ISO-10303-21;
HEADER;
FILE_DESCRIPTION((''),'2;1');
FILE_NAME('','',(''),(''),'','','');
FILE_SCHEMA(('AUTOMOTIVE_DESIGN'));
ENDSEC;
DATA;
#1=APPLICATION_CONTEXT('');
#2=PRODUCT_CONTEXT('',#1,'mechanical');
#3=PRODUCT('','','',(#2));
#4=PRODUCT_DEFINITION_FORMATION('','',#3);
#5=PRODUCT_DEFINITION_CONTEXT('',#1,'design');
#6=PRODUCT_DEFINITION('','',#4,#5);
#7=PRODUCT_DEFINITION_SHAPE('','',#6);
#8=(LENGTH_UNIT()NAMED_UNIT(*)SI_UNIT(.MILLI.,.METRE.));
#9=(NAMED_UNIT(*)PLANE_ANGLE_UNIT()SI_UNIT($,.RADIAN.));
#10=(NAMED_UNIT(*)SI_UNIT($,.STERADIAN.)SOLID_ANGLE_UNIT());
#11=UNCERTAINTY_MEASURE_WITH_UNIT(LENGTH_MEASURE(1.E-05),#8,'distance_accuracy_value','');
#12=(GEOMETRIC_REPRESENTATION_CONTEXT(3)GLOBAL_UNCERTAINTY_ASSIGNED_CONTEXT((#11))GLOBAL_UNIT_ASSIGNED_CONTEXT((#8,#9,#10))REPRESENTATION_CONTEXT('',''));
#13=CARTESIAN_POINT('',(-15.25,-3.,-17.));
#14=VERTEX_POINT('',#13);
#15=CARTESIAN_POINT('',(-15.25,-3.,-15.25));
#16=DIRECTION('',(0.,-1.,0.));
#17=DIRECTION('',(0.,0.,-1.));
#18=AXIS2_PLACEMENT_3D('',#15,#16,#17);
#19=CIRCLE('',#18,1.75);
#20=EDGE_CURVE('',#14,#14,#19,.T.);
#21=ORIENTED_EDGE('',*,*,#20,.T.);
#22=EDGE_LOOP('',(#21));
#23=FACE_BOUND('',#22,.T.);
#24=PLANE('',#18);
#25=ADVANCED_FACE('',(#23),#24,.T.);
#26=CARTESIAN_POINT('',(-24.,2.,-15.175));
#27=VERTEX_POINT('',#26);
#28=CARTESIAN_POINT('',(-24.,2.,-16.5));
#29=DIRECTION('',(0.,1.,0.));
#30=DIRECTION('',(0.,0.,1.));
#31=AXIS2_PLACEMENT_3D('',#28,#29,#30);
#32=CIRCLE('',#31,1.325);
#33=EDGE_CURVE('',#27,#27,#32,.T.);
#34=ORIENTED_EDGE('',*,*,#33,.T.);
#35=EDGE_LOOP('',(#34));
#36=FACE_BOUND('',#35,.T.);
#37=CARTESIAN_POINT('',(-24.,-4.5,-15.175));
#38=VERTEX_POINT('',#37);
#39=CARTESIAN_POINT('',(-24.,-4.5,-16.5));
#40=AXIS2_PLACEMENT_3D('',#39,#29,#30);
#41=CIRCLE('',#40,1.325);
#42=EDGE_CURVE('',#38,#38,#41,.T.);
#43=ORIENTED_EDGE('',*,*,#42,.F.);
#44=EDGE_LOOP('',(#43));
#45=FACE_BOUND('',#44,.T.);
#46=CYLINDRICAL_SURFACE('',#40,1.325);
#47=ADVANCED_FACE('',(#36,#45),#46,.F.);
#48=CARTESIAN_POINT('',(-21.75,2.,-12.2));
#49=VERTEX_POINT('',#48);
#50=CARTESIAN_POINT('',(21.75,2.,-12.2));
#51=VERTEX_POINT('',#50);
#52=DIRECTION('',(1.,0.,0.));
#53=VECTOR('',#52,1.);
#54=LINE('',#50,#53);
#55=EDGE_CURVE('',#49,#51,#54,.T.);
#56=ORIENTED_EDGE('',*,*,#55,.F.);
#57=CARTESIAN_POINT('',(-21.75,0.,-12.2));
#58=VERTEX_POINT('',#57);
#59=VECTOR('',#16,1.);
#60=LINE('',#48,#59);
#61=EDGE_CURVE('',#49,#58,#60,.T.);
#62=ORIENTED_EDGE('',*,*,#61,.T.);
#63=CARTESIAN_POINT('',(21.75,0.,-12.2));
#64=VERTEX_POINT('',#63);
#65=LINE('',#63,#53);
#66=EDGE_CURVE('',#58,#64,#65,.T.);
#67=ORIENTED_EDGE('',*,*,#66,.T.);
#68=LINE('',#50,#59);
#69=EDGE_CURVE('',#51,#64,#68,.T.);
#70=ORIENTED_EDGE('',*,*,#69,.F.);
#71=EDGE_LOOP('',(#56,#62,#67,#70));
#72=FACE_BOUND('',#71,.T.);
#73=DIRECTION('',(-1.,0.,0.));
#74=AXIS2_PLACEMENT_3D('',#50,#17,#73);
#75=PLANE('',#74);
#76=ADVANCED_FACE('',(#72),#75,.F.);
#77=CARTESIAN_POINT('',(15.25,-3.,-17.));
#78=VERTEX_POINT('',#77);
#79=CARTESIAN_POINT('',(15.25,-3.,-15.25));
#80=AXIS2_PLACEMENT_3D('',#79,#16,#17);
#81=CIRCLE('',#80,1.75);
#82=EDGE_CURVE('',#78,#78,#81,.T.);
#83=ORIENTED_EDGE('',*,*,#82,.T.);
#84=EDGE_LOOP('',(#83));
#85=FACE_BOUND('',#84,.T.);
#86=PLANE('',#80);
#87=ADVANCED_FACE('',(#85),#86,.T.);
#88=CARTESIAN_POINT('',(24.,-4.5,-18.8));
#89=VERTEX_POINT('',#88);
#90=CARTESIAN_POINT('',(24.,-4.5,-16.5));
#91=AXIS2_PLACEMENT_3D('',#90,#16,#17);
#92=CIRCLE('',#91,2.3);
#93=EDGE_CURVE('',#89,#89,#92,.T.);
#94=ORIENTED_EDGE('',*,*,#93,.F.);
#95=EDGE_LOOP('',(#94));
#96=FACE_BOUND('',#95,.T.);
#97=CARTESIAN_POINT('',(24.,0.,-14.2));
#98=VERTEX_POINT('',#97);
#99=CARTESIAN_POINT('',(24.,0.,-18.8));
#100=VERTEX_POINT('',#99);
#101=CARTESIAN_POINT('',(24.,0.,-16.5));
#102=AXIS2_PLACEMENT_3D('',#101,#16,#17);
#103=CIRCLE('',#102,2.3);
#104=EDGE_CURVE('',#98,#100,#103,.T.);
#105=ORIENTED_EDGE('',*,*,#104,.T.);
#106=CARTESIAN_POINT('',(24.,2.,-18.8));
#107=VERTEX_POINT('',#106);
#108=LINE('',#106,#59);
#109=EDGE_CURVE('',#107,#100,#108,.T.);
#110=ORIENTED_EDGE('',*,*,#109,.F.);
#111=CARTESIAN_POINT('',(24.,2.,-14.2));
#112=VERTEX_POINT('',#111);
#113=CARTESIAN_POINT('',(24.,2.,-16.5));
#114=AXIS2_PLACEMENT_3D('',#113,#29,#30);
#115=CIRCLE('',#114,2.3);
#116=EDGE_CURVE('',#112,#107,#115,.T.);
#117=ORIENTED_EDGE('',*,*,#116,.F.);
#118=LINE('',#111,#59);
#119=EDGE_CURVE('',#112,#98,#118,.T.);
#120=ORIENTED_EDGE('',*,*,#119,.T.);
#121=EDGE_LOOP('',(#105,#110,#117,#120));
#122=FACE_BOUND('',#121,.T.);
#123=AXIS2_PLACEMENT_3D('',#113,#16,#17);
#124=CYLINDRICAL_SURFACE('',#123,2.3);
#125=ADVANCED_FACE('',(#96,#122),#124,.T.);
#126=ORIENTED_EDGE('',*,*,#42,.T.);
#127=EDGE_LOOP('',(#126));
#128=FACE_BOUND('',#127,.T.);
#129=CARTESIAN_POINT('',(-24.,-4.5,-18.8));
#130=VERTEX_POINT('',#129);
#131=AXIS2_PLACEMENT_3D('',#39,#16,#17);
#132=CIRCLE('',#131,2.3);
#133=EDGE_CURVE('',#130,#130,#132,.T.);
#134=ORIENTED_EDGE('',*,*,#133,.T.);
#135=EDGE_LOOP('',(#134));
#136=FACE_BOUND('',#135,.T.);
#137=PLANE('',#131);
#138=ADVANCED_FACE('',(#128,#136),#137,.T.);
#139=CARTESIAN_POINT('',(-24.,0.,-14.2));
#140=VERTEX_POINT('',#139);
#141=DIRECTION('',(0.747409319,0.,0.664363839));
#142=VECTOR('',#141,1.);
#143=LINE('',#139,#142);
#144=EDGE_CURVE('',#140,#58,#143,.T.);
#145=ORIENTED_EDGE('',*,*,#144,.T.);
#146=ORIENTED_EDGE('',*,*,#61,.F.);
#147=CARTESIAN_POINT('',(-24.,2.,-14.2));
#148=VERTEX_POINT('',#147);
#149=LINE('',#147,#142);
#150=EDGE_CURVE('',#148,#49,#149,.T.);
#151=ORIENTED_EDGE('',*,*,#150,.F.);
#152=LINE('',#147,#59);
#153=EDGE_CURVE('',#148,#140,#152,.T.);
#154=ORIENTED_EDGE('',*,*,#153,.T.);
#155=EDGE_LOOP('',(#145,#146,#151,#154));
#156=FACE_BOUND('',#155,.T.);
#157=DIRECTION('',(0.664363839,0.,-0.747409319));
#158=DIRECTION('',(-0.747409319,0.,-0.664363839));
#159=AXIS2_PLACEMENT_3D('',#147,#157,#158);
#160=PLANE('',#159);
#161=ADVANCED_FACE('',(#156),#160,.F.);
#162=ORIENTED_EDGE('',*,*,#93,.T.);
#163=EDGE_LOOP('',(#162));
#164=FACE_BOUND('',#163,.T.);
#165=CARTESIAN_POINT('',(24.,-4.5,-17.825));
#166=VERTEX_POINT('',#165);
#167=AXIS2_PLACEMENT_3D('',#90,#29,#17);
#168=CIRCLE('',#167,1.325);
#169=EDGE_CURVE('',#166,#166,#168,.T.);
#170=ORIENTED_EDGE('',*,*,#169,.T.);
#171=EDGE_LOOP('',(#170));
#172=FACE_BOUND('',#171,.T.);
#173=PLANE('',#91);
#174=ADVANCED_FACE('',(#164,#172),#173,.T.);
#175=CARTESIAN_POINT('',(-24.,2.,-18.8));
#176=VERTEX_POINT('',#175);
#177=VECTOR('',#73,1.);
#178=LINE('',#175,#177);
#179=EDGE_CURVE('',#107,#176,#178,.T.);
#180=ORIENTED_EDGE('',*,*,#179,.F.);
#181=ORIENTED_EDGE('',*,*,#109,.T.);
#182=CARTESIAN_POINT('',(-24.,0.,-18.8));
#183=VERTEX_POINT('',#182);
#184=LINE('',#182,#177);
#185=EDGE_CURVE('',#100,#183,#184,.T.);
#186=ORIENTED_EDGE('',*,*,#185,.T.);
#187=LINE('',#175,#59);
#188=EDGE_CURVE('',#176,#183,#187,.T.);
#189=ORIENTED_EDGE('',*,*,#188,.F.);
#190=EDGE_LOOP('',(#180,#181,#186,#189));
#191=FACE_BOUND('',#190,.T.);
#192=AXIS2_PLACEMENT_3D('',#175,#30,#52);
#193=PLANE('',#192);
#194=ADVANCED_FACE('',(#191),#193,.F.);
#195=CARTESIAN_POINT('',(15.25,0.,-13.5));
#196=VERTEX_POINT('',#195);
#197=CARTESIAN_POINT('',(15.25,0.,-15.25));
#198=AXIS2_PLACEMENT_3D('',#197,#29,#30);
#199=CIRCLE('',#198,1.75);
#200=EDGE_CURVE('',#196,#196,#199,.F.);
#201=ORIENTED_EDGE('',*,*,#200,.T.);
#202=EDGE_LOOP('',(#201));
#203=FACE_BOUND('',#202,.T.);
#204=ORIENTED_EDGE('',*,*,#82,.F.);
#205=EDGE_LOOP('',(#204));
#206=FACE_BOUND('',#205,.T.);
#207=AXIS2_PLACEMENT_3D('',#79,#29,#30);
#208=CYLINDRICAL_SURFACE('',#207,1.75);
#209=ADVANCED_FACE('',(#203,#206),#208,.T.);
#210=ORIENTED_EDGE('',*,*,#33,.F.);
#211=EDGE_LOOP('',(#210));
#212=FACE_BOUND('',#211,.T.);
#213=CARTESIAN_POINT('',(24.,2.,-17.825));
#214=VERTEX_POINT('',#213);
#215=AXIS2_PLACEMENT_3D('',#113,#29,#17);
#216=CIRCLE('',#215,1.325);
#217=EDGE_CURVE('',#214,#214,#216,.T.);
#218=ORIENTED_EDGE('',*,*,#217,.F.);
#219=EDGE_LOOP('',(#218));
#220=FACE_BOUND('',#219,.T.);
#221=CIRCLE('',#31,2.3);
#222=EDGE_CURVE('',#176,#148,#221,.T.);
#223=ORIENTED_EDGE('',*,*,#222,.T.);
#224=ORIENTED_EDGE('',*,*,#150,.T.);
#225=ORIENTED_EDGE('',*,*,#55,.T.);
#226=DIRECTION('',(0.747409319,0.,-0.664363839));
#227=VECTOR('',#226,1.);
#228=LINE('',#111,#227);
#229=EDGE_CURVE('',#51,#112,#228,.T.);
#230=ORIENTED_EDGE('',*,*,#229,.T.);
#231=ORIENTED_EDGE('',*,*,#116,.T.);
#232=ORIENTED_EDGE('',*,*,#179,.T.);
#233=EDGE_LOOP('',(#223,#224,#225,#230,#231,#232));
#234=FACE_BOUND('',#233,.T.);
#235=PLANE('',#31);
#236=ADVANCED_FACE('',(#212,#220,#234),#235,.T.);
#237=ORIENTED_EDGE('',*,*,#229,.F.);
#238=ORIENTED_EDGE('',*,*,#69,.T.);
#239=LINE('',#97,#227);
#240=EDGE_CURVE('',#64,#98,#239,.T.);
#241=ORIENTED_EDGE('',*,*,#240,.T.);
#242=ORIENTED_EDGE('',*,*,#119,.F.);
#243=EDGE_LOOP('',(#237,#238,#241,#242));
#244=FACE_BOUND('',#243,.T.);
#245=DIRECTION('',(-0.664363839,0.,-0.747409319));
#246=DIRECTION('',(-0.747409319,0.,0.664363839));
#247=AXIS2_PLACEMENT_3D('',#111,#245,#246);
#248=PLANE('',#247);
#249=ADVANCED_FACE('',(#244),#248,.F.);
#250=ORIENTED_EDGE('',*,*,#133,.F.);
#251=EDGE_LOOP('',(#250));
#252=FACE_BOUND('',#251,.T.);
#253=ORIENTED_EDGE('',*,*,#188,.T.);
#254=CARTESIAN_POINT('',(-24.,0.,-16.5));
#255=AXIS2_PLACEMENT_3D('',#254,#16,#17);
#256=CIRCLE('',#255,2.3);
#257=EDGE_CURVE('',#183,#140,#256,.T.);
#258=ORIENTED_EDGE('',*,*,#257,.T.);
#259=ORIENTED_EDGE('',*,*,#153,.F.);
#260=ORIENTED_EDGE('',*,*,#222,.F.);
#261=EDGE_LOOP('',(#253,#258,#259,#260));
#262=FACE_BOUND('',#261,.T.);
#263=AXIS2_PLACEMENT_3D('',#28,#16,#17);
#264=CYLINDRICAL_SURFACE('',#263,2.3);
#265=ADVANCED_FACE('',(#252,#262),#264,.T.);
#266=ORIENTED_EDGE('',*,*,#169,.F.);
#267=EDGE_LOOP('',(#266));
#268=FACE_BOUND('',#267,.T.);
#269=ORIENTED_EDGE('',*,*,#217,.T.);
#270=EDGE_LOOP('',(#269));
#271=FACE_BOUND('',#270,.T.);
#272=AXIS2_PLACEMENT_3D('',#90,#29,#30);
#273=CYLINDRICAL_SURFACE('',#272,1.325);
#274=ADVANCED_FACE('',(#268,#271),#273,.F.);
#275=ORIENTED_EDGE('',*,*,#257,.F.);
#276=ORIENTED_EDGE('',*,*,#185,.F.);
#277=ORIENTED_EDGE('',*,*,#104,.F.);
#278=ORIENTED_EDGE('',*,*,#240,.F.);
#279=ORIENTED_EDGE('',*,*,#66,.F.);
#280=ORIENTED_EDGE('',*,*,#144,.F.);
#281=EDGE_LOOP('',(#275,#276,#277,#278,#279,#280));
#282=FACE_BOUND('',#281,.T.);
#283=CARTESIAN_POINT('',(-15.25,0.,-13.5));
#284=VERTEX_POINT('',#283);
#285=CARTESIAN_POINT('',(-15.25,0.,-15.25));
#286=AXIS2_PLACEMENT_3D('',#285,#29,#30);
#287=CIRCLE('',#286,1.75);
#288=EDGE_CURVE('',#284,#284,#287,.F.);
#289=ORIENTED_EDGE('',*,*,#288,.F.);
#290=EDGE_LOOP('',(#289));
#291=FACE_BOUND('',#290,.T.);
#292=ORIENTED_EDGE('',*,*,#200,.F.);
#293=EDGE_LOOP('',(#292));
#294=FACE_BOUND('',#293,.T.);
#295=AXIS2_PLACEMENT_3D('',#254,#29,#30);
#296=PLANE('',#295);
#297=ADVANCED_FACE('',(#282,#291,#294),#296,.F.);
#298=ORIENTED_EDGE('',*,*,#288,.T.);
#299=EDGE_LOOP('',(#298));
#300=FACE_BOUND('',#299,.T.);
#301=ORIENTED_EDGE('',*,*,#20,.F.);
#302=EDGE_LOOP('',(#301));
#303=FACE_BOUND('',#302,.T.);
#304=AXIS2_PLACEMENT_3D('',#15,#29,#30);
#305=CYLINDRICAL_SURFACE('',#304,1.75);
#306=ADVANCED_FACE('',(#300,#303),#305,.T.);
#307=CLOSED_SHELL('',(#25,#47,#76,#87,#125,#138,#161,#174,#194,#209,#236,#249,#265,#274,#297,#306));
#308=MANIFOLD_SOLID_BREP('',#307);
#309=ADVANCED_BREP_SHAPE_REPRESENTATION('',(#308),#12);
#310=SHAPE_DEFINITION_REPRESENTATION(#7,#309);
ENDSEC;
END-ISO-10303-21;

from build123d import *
from build123d.topology import SkipClean

# Parameters (mm, degrees)
BOSS_EXTRUDE1_DEPTH     = 2
BOSS_EXTRUDE2_START     = 4.5
SKETCH6_R               = 2.3
BOSS_EXTRUDE2_DEPTH     = 4.5
CUT_EXTRUDE1_DEPTH      = 33.640159313
CUT_EXTRUDE1_DEPTH_BACK = 33.640159313
SKETCH1_R               = 1.325
SKETCH7_R               = 1.75
BOSS_EXTRUDE3_DEPTH     = 3


with BuildPart() as part:
    # Sketch5 → Boss-Extrude1 (new body)
    with BuildSketch(Plane(origin=(0, 0, 0), x_dir=(1, 0, 0), z_dir=(0, 1, 0))):
        with BuildLine():
            Line((-24, 14.2), (-21.75, 12.2))
            Line((-21.75, 12.2), (21.75, 12.2))
            Line((21.75, 12.2), (24, 14.2))
            ThreePointArc((24, 14.2), (26.3, 16.5), (24, 18.8))
            Line((24, 18.8), (-24, 18.8))
            ThreePointArc((-24, 18.8), (-26.3, 16.5), (-24, 14.2))
        make_face()
    extrude(amount=BOSS_EXTRUDE1_DEPTH)

    # Sketch6 → Boss-Extrude2 (add)
    with SkipClean():  # the faces are left unmerged after this step: merging them gives an invalid solid
        with BuildSketch(Plane.XZ.offset(BOSS_EXTRUDE2_START)):
            with Locations((-24, -16.5)):
                Circle(SKETCH6_R)
            with Locations((24, -16.5)):
                Circle(SKETCH6_R)
        extrude(amount=-BOSS_EXTRUDE2_DEPTH)

    # Sketch1 → Cut-Extrude1 (cut, two sides: drawn at the far end of the back side and taken through both)
    with SkipClean():  # the faces are left unmerged after this step: merging them gives an invalid solid
        with BuildSketch(Plane(origin=(0, 0, 0), x_dir=(1, 0, 0), z_dir=(0, 1, 0)).offset(-CUT_EXTRUDE1_DEPTH_BACK)):
            with Locations((-24, 16.5)):
                Circle(SKETCH1_R)
            with Locations((24, 16.5)):
                Circle(SKETCH1_R)
            with Locations((-24, -16.5)):
                Circle(SKETCH1_R)
            with Locations((24, -16.5)):
                Circle(SKETCH1_R)
        extrude(amount=CUT_EXTRUDE1_DEPTH + CUT_EXTRUDE1_DEPTH_BACK, mode=Mode.SUBTRACT)

    # Sketch7 → Boss-Extrude3 (add)
    with SkipClean():  # the faces are left unmerged after this step: merging them gives an invalid solid
        with BuildSketch(Plane.XZ):
            with Locations((-15.25, -15.25)):
                Circle(SKETCH7_R)
            with Locations((15.25, -15.25)):
                Circle(SKETCH7_R)
        extrude(amount=BOSS_EXTRUDE3_DEPTH)


solid = part.part
